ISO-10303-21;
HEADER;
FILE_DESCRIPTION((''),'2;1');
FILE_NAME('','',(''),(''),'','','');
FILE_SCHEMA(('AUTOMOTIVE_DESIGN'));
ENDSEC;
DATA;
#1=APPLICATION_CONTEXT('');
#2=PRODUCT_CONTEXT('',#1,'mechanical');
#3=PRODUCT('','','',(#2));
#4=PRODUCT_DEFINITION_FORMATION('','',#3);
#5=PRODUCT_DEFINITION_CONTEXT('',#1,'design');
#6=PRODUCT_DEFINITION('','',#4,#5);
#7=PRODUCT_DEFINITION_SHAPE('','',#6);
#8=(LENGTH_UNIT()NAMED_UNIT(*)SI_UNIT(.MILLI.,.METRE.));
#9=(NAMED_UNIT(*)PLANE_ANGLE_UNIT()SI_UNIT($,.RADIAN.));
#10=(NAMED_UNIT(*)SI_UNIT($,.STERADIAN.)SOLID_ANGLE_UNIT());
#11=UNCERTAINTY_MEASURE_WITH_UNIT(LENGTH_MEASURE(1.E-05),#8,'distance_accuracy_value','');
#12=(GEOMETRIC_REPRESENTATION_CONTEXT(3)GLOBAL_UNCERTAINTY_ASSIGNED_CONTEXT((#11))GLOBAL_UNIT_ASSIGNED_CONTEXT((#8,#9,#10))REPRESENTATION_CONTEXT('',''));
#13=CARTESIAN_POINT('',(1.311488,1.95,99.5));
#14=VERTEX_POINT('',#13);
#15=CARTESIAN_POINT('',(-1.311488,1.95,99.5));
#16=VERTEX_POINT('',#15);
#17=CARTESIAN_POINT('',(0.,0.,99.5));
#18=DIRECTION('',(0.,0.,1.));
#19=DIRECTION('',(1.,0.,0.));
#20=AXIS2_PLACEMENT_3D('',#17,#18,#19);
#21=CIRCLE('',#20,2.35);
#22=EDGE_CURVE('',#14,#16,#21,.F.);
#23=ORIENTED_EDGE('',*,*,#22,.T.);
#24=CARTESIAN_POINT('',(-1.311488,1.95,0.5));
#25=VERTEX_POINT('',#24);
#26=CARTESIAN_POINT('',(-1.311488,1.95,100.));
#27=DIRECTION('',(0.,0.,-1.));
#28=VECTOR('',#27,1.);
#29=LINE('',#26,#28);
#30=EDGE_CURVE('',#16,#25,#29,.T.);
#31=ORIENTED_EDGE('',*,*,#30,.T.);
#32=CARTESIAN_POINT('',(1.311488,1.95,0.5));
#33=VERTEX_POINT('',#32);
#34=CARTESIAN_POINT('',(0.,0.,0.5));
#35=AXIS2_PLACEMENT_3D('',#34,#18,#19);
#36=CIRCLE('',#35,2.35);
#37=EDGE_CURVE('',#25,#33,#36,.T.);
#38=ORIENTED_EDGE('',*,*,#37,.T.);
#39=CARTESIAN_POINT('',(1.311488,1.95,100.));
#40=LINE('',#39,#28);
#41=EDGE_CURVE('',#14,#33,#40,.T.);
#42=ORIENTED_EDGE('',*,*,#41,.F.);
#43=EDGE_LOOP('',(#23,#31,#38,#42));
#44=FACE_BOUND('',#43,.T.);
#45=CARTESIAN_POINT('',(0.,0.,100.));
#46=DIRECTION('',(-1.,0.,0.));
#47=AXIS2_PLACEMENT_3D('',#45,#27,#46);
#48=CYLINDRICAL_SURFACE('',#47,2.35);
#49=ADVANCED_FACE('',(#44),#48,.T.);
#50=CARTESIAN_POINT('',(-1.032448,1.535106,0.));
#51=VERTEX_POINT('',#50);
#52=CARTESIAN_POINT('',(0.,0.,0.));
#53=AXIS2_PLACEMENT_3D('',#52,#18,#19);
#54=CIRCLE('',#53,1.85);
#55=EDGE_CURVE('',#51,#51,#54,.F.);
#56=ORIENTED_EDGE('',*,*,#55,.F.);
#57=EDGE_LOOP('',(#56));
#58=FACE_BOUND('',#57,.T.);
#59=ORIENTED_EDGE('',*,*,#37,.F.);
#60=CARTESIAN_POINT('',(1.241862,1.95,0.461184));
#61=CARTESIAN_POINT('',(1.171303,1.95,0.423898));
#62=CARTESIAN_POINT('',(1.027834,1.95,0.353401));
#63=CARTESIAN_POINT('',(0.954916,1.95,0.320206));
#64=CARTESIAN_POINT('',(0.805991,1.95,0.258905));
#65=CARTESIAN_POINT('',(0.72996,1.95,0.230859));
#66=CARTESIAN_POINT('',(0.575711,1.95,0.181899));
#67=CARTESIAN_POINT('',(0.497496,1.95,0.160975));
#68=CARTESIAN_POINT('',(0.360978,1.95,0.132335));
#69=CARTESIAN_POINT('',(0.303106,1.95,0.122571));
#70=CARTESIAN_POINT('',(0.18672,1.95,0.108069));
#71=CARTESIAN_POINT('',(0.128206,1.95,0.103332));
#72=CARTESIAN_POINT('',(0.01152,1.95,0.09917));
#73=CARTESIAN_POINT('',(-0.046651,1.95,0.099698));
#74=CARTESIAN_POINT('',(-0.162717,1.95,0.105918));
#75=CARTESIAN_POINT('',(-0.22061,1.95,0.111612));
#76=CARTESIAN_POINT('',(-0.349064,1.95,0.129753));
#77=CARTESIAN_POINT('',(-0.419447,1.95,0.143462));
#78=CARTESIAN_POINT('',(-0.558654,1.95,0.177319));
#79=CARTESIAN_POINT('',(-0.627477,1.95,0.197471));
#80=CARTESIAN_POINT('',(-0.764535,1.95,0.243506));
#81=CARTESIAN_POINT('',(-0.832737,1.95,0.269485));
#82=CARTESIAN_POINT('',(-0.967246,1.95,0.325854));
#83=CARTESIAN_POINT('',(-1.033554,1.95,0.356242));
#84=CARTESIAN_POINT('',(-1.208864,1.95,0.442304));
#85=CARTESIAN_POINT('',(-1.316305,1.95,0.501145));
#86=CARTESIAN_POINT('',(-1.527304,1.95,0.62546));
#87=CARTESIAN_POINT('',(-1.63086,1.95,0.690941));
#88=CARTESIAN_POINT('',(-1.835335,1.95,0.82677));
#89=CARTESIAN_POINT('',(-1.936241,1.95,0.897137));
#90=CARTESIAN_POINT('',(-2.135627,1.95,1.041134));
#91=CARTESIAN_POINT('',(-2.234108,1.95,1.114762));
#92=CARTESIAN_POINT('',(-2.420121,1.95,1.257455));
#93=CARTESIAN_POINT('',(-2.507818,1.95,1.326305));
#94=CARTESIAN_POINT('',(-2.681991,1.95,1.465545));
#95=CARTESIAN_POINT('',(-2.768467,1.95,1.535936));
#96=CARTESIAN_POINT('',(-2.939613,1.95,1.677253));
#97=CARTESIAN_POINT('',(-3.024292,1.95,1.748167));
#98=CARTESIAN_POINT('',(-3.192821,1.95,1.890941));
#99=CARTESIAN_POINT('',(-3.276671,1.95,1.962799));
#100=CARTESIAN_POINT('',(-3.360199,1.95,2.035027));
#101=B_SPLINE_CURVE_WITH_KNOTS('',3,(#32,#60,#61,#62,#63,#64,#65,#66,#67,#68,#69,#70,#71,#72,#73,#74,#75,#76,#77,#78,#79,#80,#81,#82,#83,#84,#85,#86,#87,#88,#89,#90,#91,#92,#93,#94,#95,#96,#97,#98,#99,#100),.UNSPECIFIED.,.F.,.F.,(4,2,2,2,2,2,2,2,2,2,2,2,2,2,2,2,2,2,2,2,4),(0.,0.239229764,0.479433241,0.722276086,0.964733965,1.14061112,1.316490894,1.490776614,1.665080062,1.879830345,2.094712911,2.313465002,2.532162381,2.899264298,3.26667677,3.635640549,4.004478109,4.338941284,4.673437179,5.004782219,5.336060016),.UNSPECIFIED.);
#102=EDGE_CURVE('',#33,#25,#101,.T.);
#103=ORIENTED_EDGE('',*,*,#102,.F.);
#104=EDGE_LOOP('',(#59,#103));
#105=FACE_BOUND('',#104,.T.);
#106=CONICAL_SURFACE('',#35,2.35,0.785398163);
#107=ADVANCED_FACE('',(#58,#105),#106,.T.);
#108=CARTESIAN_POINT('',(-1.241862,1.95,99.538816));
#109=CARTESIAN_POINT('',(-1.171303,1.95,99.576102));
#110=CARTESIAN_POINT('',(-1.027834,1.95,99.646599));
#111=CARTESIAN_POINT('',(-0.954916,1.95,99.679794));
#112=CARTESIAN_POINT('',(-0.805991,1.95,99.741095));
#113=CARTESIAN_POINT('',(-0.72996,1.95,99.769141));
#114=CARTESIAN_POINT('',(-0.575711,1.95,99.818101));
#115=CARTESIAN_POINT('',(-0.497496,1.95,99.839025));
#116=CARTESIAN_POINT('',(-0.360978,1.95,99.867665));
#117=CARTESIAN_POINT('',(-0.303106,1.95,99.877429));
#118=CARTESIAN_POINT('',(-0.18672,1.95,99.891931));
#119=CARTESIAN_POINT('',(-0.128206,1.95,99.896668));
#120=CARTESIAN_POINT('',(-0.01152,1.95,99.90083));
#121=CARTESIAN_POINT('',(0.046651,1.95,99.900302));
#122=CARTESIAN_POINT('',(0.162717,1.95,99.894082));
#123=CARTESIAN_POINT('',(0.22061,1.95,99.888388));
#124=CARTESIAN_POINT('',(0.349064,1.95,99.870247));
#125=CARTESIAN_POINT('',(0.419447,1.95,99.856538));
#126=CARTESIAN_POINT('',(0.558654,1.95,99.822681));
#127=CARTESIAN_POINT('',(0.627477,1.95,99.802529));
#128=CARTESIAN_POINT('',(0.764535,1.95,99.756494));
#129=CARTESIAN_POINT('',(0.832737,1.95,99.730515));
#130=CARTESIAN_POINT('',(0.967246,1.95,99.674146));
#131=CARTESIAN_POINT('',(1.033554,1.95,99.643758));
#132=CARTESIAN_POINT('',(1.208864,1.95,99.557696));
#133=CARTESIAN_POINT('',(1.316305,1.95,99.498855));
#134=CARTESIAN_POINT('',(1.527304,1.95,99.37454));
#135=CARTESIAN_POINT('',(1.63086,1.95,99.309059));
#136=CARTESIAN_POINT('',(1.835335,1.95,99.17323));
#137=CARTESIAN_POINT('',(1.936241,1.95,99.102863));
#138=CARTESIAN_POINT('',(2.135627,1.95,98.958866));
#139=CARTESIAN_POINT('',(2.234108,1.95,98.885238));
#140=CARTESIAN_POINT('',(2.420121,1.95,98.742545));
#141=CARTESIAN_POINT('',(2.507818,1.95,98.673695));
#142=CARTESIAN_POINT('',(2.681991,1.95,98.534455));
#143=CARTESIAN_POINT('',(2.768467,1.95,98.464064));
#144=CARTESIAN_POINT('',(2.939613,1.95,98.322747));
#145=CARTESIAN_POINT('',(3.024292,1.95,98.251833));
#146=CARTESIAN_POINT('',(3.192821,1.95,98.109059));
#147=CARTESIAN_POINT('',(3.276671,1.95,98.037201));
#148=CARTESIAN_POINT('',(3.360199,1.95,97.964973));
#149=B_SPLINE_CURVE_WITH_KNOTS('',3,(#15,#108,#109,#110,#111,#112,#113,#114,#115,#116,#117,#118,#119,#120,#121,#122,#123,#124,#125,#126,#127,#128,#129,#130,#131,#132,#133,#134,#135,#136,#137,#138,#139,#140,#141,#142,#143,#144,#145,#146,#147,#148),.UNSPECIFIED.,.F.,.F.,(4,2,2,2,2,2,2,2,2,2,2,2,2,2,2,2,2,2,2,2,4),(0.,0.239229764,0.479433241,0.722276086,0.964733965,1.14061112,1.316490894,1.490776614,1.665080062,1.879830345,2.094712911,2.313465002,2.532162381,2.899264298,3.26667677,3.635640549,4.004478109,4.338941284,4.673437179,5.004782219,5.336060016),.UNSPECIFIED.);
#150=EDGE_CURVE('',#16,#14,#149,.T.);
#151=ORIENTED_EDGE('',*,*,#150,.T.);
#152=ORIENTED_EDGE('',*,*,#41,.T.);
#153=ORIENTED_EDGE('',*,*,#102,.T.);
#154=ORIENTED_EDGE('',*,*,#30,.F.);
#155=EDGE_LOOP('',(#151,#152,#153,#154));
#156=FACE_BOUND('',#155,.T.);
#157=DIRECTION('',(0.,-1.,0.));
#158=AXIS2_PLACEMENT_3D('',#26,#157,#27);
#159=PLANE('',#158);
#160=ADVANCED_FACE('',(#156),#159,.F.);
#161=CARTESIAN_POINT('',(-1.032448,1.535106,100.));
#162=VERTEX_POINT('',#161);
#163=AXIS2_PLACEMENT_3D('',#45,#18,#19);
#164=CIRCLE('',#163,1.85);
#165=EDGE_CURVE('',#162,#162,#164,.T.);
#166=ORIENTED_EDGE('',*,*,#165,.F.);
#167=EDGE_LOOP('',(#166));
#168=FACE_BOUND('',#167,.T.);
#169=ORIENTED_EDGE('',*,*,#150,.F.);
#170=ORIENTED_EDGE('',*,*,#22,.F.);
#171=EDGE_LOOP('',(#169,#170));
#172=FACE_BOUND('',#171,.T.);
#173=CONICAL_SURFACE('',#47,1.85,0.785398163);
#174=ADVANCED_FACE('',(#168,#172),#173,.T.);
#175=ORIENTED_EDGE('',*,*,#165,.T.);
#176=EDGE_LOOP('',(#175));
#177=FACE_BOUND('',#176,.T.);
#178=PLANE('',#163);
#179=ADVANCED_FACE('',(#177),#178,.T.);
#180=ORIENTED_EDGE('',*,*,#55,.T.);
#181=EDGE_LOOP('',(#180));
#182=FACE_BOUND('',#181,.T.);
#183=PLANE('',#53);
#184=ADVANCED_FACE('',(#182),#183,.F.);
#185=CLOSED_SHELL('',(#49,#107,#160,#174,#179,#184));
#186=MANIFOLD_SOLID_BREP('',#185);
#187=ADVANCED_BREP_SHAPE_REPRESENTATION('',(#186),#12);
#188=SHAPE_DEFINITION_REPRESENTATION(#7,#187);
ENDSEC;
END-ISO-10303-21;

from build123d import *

# Parameters (mm, degrees)
BOSS_EXTRUDE1_DEPTH = 100


with BuildPart() as part:
    # Sketch1 → Boss-Extrude1 (new body)
    with BuildSketch(Plane.XY):
        with BuildLine():
            Line((-1.311487705, 1.95), (1.311487705, 1.95))
            ThreePointArc((1.311487705, 1.95), (0, -2.35), (-1.311487705, 1.95))
        make_face()
    extrude(amount=BOSS_EXTRUDE1_DEPTH)

    # Chamfer1: read off the stored shape, not the designer's step
    # Chamfer1 outline → Chamfer1 (revolve, cut)
    with BuildSketch(Plane.XZ):
        Polygon((2.35, 0.5), (1.85, 0), (2.35, 0), align=None)
        Polygon((1.85, 100), (2.35, 99.5), (2.35, 100), align=None)
    revolve(axis=Axis((0, 0, 0), (0, 0, 1)), mode=Mode.SUBTRACT)


solid = part.part
